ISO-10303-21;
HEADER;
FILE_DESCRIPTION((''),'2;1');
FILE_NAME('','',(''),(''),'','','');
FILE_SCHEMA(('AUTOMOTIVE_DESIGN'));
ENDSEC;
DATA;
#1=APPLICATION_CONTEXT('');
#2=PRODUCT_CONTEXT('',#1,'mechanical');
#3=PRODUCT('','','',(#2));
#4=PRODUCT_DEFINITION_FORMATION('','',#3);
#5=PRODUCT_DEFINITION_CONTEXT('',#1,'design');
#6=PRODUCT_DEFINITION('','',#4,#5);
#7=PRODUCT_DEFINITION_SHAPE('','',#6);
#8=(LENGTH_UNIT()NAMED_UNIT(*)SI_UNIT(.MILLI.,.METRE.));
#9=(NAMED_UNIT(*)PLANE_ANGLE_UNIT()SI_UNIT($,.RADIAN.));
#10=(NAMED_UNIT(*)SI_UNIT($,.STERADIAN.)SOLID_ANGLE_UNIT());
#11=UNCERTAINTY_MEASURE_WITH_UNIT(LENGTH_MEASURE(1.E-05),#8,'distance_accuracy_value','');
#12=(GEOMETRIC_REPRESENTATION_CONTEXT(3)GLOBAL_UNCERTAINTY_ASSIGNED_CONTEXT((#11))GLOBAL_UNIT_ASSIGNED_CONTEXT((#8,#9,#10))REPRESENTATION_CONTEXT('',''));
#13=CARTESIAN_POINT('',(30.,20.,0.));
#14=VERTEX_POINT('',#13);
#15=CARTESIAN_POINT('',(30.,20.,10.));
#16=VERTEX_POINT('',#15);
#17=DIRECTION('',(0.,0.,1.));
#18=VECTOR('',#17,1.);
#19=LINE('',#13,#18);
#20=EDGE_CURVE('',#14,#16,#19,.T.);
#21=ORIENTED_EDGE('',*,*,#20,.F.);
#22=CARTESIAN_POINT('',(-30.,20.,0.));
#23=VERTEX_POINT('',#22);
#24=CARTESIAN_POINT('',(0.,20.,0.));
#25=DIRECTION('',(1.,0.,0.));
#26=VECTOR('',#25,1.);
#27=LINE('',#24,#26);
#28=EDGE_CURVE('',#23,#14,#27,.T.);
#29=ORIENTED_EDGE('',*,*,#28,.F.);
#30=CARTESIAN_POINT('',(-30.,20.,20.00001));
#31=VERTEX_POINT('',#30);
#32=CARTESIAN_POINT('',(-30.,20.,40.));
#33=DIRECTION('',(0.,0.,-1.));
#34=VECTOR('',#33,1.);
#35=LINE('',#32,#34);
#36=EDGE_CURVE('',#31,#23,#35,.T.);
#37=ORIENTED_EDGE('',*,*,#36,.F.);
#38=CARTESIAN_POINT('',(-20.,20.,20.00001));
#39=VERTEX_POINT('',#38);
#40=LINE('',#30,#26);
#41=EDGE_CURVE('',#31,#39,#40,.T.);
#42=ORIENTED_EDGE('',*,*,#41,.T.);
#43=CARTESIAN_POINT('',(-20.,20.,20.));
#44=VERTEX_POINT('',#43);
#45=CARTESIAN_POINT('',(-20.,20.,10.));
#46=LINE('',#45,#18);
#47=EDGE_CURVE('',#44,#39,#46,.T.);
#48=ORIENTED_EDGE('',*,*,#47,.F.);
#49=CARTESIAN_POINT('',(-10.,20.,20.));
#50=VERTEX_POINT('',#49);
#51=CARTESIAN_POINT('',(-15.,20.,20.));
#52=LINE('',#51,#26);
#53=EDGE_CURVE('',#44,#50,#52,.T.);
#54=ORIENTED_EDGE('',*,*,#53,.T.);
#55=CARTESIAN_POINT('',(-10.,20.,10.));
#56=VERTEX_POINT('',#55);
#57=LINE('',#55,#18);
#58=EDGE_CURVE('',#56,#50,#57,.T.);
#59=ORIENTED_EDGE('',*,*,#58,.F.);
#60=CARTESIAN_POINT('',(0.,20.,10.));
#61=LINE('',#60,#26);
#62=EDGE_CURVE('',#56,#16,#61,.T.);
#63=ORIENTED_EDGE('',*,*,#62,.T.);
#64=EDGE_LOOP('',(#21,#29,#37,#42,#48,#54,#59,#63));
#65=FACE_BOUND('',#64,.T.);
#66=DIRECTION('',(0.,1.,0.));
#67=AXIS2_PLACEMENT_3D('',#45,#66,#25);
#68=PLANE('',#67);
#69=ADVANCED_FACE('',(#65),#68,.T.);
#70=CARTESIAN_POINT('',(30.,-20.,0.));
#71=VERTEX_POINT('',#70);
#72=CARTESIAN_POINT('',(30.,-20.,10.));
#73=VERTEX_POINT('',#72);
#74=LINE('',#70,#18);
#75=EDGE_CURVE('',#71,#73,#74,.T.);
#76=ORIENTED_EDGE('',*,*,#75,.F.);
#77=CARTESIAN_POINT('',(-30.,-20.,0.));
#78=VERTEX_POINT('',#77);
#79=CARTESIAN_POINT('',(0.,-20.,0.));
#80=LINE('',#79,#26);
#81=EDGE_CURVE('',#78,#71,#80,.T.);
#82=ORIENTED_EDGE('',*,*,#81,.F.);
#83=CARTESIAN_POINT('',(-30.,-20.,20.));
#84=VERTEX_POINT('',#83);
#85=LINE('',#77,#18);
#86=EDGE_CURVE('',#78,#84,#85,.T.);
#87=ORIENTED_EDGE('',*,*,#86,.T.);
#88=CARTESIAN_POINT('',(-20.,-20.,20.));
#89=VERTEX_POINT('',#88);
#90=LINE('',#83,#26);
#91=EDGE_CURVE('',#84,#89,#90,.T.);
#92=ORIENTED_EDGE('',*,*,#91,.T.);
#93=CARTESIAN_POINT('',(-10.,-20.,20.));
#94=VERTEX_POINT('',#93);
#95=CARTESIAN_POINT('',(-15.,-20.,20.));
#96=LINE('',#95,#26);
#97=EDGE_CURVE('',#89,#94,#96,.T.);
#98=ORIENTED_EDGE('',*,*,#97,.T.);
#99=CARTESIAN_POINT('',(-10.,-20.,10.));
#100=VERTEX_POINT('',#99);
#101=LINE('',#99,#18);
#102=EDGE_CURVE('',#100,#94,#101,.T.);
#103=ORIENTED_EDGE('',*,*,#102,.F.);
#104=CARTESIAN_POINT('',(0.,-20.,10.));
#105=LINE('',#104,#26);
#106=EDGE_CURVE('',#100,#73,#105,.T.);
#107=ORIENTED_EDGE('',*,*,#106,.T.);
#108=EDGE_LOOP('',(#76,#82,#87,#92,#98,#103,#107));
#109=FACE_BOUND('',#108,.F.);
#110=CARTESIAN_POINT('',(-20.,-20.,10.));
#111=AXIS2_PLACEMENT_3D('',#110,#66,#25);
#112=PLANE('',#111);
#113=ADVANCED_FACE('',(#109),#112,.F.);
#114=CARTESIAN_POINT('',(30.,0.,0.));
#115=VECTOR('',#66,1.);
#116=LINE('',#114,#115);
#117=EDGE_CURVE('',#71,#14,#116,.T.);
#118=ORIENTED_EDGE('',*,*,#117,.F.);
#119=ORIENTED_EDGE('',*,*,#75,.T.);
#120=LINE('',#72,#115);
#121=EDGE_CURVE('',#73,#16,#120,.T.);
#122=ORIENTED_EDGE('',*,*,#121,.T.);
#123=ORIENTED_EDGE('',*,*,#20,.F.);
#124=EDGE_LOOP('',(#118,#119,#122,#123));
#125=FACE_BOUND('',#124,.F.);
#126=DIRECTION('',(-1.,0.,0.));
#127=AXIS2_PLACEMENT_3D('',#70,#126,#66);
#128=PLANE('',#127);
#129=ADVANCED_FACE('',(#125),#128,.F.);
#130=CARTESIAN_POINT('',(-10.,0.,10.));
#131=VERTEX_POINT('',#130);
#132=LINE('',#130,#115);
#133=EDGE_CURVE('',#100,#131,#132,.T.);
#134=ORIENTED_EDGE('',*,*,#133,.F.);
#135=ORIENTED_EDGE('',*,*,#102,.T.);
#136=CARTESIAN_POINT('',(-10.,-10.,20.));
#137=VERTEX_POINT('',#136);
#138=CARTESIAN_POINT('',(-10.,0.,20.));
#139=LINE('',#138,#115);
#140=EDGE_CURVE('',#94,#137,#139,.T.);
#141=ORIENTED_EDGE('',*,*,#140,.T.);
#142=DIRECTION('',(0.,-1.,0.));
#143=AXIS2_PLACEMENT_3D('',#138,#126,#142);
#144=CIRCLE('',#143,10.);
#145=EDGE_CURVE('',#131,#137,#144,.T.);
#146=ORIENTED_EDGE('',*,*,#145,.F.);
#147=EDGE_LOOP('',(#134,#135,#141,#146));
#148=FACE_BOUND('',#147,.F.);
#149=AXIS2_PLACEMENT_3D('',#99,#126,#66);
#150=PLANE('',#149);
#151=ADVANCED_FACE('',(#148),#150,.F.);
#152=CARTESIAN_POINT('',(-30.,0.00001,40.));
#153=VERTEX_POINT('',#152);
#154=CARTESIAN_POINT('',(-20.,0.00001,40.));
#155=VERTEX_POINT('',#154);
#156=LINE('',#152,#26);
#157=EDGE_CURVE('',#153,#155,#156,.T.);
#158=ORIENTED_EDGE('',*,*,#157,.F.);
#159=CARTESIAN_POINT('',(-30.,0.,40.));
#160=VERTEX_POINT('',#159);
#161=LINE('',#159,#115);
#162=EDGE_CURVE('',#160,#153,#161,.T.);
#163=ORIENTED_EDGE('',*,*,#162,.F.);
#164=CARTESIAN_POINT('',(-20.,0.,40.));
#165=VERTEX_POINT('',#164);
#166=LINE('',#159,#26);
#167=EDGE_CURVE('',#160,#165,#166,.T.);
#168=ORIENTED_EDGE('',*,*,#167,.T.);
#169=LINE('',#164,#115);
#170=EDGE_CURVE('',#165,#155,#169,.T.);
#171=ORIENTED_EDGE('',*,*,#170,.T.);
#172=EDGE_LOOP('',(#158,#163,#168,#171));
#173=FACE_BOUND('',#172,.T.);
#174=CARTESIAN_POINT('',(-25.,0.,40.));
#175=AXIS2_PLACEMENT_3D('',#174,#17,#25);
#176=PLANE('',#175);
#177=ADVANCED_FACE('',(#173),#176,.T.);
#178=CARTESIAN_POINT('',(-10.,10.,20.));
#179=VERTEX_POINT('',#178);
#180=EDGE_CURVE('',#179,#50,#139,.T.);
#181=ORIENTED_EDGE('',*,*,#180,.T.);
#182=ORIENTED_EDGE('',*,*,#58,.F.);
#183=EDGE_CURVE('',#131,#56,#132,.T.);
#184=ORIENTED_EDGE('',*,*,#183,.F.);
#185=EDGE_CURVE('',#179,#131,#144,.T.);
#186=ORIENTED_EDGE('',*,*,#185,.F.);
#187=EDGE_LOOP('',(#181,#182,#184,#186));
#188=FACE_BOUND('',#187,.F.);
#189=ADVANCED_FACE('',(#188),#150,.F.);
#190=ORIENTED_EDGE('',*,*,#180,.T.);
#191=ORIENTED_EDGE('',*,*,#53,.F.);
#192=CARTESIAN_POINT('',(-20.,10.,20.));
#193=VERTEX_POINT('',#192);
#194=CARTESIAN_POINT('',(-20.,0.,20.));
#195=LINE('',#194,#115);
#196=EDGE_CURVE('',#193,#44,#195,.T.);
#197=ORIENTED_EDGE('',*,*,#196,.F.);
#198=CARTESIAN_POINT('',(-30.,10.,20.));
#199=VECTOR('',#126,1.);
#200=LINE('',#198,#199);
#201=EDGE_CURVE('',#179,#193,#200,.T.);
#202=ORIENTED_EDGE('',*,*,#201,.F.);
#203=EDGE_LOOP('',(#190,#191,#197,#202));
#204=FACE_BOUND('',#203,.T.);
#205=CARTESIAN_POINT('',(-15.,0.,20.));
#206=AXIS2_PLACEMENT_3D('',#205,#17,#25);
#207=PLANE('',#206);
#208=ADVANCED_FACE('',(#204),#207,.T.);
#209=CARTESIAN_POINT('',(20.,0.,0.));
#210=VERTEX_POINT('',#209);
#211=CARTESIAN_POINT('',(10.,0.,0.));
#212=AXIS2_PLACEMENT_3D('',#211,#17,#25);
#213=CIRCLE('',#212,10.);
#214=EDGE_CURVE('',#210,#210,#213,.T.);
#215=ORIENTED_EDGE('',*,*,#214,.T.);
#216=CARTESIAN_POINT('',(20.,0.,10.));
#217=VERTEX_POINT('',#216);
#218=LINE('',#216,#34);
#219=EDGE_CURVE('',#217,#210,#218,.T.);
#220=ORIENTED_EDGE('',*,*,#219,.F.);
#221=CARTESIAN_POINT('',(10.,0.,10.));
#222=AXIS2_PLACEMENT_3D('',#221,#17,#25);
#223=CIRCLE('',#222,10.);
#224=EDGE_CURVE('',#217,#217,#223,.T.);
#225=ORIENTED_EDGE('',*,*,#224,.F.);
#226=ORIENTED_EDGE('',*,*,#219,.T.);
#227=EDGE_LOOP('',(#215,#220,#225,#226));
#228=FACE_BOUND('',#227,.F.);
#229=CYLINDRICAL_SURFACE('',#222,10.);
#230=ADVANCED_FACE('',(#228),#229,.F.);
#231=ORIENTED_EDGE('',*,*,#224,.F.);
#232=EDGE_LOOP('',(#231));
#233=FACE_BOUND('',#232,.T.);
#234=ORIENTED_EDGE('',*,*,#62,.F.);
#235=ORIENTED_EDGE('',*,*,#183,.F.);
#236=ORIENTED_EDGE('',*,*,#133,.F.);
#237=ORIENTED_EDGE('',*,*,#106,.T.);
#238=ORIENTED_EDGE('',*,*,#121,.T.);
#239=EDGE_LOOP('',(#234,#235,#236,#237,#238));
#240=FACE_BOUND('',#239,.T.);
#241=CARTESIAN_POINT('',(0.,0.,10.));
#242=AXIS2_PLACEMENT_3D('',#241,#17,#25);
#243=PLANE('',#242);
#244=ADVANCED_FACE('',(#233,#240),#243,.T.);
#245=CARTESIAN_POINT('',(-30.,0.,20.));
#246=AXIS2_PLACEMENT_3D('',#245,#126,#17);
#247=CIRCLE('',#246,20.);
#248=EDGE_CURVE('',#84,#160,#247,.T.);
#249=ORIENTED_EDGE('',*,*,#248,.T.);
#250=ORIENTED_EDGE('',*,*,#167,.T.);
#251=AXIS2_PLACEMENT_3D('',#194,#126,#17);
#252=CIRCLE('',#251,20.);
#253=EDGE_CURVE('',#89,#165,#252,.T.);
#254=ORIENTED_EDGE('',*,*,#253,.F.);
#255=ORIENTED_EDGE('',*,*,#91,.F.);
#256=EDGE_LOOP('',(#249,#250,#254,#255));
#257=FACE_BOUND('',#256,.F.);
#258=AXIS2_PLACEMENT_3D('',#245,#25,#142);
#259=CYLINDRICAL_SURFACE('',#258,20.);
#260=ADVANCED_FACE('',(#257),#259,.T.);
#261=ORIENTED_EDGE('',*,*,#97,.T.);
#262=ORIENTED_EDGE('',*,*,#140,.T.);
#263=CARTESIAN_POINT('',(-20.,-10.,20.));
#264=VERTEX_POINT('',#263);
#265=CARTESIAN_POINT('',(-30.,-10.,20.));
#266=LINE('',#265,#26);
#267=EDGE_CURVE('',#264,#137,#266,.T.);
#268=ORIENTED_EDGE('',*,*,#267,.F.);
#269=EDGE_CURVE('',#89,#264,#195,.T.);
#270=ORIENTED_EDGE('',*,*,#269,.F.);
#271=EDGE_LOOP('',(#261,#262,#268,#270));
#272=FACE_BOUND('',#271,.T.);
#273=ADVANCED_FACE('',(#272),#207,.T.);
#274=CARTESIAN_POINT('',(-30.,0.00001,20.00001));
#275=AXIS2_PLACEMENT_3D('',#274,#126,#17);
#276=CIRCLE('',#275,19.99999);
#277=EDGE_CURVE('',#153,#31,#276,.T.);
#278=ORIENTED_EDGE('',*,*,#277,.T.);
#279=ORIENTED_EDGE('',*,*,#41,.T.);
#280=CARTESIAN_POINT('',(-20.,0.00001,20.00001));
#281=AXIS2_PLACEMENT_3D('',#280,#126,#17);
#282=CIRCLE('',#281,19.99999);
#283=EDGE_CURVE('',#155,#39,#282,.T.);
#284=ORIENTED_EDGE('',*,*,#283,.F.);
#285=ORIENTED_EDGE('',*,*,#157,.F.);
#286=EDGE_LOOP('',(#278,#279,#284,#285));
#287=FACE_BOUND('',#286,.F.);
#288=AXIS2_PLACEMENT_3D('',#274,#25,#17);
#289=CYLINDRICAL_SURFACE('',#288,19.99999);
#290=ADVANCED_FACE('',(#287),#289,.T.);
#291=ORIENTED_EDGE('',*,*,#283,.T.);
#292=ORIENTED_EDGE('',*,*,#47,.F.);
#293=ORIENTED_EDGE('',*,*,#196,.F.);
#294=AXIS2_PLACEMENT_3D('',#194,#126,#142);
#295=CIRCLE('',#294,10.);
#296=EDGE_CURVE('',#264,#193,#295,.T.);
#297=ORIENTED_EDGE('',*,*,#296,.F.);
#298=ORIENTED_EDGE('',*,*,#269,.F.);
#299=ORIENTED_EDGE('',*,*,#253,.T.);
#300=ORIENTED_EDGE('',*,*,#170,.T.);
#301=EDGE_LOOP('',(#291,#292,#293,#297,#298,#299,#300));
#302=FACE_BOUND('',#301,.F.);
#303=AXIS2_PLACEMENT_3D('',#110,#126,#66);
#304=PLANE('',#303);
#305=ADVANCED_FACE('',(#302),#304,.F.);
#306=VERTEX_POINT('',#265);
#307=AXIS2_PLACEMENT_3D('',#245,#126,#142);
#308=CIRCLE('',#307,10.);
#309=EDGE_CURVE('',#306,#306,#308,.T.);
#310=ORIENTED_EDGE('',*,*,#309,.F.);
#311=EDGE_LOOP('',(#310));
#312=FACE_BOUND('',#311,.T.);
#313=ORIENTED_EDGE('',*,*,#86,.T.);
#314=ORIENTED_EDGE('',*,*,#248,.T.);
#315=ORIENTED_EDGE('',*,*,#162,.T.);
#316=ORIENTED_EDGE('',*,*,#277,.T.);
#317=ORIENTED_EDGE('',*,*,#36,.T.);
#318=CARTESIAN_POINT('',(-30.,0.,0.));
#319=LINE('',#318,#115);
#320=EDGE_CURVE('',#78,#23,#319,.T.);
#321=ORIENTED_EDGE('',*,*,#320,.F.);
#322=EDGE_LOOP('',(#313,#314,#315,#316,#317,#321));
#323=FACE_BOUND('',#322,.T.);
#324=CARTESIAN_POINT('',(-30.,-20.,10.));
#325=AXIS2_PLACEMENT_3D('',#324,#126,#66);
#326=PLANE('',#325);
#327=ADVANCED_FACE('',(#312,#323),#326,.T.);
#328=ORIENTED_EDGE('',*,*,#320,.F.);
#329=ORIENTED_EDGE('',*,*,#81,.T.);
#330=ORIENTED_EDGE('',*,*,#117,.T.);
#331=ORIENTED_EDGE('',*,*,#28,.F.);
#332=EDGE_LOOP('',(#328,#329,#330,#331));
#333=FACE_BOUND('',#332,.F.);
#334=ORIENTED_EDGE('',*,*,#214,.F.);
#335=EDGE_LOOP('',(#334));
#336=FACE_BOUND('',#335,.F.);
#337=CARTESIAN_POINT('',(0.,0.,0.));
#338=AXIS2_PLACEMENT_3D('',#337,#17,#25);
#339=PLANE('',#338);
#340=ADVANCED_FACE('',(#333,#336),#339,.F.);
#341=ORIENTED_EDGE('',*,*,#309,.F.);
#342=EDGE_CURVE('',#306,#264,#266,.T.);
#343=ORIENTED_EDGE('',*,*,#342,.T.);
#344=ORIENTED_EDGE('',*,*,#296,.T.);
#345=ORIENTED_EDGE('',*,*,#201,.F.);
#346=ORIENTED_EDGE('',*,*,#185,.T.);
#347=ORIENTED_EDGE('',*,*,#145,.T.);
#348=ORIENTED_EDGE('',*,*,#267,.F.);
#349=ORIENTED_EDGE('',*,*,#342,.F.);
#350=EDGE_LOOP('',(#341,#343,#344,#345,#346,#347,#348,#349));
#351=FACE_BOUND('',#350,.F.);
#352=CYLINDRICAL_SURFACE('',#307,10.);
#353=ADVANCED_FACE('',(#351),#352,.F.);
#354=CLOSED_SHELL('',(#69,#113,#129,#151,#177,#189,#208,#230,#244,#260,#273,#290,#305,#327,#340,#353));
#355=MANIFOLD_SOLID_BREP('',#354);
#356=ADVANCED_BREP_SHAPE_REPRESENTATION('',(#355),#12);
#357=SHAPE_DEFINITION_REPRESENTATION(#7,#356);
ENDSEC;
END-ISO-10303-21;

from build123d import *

# Parameters (mm, degrees)
F0_W      = 60
F0_H      = 40
F1_DEPTH  = 10
F2_W      = 10
F2_H      = 40
F3_DEPTH  = 30
F4_W      = 10
F4_H      = 40
F5_DEPTH  = 10
F6_R      = 10
F7_DEPTH  = 60.001
F8_R      = 20
F9_R      = 19.99999
F10_R     = 10
F11_DEPTH = 10.001


# Not quite as in the source:
# - a fillet or chamfer is up to 0.001 mm smaller than in the source, because OpenCascade refuses the exact size


with BuildPart() as f1:
    # F0 (on Top) → F1 (new body)
    with BuildSketch(Plane.XY):
        Rectangle(F0_W, F0_H)
    extrude(amount=F1_DEPTH)

    # F2 (on face) → F3 (join)
    with BuildSketch(Plane.XY.offset(10)):
        with Locations((-25, 0)):
            Rectangle(F2_W, F2_H)
    extrude(amount=F3_DEPTH)

    # F4 (on face) → F5 (join)
    with BuildSketch(Plane.XY.offset(10)):
        with Locations((-15, 0)):
            Rectangle(F4_W, F4_H)
    extrude(amount=F5_DEPTH)

    # F6 (on face) → F7 (cut, through all)
    with BuildSketch(Plane(origin=(-30, 0, 0), x_dir=(0, -1, 0), z_dir=(-1, 0, 0))):
        with Locations((0, 20)):
            Circle(F6_R)
    extrude(amount=-F7_DEPTH, mode=Mode.SUBTRACT)

    # F8
    f8_edges = [f1.edges().sort_by_distance(p)[0] for p in [
        (-25, -20, 40),
    ]]
    fillet(f8_edges, radius=F8_R)

    # F9 (radius 20 in the source; OpenCascade refuses exactly that, so slightly less here)
    f9_edges = [f1.edges().sort_by_distance(p)[0] for p in [
        (-25, 20, 40),
    ]]
    fillet(f9_edges, radius=F9_R)

    # F10 (on face) → F11 (cut, through all)
    with BuildSketch(Plane.XY.offset(10)):
        with Locations((10, 0)):
            Circle(F10_R)
    extrude(amount=-F11_DEPTH, mode=Mode.SUBTRACT)


solid = f1.part
